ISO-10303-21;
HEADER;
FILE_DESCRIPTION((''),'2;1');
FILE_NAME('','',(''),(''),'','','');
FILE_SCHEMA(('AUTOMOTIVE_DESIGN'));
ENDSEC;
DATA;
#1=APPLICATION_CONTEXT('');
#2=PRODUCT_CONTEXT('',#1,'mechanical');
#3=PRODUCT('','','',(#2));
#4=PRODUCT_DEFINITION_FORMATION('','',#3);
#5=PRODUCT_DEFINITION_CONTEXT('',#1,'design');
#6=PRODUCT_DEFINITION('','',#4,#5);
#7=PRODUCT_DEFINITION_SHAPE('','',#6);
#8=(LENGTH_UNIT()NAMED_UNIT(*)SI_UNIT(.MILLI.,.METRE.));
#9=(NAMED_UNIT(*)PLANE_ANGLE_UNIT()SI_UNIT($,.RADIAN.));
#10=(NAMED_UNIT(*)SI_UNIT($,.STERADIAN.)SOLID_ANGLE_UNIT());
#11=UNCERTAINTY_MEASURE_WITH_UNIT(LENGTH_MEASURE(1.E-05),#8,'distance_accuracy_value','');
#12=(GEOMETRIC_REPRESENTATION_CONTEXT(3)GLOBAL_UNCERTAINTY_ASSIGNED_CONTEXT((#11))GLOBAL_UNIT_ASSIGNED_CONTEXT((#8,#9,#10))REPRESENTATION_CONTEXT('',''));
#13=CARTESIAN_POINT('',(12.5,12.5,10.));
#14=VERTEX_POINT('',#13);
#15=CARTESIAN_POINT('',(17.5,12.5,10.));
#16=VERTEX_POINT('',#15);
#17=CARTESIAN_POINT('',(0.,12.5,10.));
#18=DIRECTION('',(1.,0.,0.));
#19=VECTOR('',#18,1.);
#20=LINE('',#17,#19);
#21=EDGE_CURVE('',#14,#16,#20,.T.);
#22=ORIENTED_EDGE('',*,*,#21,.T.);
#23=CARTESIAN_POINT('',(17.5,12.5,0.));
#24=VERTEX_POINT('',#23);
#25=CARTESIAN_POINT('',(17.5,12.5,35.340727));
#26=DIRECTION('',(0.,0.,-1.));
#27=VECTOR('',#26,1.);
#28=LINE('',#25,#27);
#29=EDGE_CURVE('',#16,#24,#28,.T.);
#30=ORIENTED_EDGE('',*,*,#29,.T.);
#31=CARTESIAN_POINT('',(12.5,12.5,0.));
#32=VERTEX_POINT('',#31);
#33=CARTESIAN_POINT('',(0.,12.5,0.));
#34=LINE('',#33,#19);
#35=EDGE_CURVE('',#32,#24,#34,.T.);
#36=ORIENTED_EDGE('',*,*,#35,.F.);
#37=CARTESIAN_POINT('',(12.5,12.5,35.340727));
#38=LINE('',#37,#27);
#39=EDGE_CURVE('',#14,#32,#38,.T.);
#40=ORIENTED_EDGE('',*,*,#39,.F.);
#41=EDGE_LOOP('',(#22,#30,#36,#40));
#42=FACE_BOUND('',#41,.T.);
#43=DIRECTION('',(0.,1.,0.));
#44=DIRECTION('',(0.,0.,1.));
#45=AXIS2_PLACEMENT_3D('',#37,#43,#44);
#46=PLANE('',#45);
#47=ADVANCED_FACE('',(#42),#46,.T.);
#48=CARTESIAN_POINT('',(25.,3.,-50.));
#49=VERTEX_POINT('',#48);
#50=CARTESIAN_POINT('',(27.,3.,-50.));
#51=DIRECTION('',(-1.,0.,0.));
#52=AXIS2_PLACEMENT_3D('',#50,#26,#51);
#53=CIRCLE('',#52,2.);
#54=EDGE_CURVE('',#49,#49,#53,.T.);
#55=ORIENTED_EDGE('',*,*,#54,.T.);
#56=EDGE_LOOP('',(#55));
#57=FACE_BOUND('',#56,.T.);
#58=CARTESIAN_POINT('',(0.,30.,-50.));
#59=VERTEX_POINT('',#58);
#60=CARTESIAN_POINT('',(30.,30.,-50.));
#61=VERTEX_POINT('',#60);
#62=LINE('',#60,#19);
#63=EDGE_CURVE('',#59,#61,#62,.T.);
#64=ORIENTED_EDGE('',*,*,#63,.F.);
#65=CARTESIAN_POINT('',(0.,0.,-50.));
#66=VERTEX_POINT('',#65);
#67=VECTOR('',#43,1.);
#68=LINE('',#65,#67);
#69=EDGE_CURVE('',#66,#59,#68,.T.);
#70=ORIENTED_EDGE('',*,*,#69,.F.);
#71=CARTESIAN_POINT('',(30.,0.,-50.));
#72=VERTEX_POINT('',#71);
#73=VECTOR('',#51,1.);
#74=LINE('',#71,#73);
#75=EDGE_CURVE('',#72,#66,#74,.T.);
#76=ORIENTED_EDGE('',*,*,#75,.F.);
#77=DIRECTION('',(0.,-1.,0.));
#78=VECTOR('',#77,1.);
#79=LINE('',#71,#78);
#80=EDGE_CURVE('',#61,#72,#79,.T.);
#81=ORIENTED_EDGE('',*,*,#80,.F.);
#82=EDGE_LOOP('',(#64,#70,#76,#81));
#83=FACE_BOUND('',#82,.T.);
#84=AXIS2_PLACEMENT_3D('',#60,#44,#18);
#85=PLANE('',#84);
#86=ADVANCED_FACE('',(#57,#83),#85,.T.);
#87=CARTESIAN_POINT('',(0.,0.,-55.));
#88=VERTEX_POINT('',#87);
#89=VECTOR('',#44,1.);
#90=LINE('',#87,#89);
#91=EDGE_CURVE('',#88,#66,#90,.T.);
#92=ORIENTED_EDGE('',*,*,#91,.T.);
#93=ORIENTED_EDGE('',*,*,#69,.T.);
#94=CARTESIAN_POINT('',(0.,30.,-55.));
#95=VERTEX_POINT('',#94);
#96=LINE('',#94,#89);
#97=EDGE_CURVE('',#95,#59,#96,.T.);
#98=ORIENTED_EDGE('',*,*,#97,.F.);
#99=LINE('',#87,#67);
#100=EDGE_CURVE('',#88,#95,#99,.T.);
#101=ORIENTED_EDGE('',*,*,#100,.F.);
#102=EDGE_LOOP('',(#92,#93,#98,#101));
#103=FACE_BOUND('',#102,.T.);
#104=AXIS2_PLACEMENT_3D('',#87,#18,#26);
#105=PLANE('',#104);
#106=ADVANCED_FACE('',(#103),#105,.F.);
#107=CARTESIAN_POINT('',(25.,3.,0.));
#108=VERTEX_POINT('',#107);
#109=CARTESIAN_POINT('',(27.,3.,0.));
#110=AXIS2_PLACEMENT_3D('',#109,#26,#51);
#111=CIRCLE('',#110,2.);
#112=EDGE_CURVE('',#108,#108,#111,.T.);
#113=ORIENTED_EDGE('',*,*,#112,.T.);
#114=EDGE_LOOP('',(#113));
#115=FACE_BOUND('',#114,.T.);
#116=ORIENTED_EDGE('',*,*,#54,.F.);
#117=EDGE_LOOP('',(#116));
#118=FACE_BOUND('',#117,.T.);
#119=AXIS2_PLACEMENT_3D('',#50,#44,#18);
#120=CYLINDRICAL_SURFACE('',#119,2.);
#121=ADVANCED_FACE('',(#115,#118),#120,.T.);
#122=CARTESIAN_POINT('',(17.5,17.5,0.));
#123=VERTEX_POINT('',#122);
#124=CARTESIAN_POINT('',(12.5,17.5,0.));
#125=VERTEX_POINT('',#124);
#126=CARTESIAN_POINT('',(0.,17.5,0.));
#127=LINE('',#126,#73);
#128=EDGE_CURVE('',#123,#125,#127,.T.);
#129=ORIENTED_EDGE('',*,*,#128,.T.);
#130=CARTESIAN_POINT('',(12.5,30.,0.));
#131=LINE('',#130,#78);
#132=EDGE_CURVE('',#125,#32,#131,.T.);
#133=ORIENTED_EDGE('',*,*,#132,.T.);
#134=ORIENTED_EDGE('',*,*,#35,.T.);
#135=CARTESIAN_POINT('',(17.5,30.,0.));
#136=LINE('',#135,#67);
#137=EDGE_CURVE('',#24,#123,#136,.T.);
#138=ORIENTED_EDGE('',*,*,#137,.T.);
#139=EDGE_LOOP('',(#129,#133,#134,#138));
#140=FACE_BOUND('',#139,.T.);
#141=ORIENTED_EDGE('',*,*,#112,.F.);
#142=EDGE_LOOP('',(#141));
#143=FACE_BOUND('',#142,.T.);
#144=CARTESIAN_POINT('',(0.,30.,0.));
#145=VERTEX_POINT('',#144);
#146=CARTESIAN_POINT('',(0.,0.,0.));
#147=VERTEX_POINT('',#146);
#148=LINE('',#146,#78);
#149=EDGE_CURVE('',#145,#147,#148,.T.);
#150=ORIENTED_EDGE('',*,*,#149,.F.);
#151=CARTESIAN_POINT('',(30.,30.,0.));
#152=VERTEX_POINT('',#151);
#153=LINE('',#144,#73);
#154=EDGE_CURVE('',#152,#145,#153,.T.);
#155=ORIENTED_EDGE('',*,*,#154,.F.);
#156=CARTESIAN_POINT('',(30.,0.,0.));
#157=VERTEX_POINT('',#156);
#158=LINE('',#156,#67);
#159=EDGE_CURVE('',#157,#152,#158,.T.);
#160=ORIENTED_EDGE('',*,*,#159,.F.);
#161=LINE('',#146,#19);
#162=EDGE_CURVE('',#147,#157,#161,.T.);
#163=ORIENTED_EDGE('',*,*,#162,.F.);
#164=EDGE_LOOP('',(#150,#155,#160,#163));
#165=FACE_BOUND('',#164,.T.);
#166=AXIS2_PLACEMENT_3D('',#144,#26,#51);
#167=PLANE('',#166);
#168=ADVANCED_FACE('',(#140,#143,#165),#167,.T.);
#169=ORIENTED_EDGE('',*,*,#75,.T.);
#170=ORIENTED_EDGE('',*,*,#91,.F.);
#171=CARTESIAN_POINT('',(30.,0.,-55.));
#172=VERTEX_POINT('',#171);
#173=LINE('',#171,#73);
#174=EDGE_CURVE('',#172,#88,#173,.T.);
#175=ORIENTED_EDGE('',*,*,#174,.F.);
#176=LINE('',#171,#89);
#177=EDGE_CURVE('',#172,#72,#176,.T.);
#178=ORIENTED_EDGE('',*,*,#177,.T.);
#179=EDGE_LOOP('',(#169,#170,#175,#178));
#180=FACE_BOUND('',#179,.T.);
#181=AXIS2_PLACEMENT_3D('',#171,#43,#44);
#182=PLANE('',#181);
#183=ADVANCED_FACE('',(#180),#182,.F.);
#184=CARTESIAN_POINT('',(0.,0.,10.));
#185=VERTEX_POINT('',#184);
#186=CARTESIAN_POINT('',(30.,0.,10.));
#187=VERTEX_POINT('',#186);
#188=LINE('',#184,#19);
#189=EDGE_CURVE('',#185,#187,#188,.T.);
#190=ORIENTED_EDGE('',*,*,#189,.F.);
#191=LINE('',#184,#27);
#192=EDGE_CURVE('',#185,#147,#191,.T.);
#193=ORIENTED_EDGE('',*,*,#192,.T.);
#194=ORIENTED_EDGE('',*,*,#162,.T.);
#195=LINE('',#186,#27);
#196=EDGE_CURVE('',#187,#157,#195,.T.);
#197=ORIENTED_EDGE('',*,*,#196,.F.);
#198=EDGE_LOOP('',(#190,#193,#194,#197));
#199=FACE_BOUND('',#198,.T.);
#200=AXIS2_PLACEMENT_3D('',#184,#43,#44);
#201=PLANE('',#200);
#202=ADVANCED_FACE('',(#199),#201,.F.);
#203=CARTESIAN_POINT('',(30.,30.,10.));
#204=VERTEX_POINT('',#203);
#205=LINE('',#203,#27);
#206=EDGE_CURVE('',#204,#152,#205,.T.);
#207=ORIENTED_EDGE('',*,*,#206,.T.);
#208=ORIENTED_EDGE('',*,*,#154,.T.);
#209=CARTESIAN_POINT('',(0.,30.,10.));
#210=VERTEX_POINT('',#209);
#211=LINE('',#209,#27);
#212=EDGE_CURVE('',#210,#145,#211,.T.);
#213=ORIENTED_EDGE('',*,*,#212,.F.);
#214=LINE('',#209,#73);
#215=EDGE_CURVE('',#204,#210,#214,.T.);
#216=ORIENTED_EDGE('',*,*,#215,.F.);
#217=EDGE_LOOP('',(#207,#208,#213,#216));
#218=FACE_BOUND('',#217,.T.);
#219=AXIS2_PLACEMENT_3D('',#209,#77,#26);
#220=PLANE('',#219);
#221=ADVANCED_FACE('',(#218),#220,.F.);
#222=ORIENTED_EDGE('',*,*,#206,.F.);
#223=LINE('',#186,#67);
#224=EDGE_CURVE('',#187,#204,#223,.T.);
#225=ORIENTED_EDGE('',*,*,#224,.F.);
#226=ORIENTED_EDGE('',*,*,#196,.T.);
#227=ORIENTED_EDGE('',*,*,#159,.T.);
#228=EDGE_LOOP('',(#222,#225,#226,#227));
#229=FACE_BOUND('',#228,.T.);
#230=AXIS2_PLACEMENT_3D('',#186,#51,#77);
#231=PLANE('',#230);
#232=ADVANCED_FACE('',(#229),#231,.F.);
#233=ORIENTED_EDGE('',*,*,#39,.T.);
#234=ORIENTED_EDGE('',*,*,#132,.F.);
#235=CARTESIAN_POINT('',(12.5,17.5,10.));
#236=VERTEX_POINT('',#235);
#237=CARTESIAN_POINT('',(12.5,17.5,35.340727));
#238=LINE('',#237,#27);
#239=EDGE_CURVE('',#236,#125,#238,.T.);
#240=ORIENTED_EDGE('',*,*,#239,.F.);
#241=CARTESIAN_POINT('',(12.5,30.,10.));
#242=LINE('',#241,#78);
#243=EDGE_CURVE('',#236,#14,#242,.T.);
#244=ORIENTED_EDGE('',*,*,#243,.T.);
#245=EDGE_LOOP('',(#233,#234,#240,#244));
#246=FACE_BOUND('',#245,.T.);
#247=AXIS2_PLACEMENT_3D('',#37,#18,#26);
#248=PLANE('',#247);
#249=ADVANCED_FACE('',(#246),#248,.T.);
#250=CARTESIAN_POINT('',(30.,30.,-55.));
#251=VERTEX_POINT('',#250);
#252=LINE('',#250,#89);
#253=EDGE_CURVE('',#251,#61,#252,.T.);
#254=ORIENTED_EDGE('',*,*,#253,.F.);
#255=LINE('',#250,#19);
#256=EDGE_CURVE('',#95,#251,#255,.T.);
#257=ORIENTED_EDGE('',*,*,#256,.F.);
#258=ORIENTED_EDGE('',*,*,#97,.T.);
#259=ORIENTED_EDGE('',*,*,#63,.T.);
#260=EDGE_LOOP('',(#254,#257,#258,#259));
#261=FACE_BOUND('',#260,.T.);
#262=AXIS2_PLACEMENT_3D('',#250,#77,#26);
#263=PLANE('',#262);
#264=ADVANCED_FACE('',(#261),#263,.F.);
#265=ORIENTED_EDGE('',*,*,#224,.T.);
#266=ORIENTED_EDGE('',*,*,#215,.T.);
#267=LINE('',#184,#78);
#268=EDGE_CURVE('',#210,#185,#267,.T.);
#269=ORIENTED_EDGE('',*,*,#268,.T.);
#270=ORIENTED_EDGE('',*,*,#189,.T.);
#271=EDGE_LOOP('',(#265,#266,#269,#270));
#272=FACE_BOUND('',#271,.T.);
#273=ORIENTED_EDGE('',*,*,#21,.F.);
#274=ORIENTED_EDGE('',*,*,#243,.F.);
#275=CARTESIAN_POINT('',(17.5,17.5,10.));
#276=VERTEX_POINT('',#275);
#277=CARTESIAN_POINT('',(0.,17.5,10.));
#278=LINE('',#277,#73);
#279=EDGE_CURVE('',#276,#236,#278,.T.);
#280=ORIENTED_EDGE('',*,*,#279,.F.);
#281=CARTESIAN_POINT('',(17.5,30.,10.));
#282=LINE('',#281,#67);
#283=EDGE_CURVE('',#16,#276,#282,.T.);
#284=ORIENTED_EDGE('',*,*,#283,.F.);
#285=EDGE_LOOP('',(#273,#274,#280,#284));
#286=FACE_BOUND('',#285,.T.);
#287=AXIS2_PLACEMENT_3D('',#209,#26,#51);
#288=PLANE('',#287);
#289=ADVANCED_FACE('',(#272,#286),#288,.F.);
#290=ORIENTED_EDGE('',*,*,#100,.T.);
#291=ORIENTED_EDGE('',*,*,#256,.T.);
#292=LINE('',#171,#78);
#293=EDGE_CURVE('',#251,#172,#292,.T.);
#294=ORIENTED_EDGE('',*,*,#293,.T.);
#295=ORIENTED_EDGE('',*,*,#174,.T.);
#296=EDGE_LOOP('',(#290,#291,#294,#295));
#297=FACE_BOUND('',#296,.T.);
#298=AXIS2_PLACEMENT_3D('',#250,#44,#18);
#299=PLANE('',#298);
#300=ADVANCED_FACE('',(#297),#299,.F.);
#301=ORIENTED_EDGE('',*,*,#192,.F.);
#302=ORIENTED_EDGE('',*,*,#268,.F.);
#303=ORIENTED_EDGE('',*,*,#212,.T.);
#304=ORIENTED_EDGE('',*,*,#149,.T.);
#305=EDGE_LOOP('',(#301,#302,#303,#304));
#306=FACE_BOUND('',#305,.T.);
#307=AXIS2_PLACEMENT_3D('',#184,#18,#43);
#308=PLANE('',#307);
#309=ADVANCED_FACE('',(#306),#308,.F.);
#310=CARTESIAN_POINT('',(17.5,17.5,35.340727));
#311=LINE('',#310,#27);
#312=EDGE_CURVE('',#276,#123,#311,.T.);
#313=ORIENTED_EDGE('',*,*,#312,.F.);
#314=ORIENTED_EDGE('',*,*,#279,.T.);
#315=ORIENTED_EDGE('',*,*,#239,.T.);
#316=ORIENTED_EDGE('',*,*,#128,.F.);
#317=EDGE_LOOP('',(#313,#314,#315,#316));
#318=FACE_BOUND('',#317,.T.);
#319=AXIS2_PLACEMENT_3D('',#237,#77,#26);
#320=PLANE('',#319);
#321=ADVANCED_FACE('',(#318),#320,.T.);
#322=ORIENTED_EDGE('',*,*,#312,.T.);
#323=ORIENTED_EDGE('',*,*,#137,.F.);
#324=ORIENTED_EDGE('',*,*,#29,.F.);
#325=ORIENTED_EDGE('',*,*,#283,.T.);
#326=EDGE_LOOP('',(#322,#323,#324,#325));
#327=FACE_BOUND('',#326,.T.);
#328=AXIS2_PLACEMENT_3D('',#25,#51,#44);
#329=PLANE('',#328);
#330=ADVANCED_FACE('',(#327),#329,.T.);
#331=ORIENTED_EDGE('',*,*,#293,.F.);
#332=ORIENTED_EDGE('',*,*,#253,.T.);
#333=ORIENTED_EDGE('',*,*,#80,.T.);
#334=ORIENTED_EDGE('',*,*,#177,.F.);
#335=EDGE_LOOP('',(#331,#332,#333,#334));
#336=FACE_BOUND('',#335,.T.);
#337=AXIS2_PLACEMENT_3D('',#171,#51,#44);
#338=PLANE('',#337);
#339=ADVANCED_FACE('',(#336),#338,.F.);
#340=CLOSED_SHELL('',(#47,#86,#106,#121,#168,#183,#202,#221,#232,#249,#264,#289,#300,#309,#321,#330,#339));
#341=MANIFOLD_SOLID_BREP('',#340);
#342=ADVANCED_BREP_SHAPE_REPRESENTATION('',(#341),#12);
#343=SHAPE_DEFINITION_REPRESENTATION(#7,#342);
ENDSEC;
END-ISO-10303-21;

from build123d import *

# Parameters (mm, degrees)
SKETCH1_W           = 30
SKETCH1_H           = 30
BOSS_EXTRUDE1_DEPTH = 10
SKETCH3_R           = 2
BOSS_EXTRUDE4_DEPTH = 50
SKETCH4_W           = 30
SKETCH4_H           = 30
BOSS_EXTRUDE5_DEPTH = 5
CAVITY1_START       = 12.5
CAVITY1_OUTLINE_W   = 5
CAVITY1_OUTLINE_H   = 10
CAVITY1_DEPTH       = 5


# Read off the part's stored shape, not the designer's step: Cavity1
with BuildPart() as part:
    # Sketch1 → Boss-Extrude1 (new body)
    with BuildSketch(Plane.XY):
        with Locations((15, 15)):
            Rectangle(SKETCH1_W, SKETCH1_H)
    extrude(amount=BOSS_EXTRUDE1_DEPTH)

    # Sketch3 → Boss-Extrude4 (add)
    with BuildSketch(Plane(origin=(0, 0, 0), x_dir=(-1, 0, 0), z_dir=(0, 0, -1))):
        with Locations((-27, 3)):
            Circle(SKETCH3_R)
    extrude(amount=BOSS_EXTRUDE4_DEPTH)

    # Sketch4 → Boss-Extrude5 (add)
    with BuildSketch(Plane(origin=(0, 0, -50), x_dir=(-1, 0, 0), z_dir=(0, 0, -1))):
        with Locations((-15, 15)):
            Rectangle(SKETCH4_W, SKETCH4_H)
    extrude(amount=BOSS_EXTRUDE5_DEPTH)

    # Cavity1 outline → Cavity1 (cut)
    with BuildSketch(Plane.YZ.offset(CAVITY1_START)):
        with Locations((15, 5)):
            Rectangle(CAVITY1_OUTLINE_W, CAVITY1_OUTLINE_H)
    extrude(amount=CAVITY1_DEPTH, mode=Mode.SUBTRACT)


solid = part.part
